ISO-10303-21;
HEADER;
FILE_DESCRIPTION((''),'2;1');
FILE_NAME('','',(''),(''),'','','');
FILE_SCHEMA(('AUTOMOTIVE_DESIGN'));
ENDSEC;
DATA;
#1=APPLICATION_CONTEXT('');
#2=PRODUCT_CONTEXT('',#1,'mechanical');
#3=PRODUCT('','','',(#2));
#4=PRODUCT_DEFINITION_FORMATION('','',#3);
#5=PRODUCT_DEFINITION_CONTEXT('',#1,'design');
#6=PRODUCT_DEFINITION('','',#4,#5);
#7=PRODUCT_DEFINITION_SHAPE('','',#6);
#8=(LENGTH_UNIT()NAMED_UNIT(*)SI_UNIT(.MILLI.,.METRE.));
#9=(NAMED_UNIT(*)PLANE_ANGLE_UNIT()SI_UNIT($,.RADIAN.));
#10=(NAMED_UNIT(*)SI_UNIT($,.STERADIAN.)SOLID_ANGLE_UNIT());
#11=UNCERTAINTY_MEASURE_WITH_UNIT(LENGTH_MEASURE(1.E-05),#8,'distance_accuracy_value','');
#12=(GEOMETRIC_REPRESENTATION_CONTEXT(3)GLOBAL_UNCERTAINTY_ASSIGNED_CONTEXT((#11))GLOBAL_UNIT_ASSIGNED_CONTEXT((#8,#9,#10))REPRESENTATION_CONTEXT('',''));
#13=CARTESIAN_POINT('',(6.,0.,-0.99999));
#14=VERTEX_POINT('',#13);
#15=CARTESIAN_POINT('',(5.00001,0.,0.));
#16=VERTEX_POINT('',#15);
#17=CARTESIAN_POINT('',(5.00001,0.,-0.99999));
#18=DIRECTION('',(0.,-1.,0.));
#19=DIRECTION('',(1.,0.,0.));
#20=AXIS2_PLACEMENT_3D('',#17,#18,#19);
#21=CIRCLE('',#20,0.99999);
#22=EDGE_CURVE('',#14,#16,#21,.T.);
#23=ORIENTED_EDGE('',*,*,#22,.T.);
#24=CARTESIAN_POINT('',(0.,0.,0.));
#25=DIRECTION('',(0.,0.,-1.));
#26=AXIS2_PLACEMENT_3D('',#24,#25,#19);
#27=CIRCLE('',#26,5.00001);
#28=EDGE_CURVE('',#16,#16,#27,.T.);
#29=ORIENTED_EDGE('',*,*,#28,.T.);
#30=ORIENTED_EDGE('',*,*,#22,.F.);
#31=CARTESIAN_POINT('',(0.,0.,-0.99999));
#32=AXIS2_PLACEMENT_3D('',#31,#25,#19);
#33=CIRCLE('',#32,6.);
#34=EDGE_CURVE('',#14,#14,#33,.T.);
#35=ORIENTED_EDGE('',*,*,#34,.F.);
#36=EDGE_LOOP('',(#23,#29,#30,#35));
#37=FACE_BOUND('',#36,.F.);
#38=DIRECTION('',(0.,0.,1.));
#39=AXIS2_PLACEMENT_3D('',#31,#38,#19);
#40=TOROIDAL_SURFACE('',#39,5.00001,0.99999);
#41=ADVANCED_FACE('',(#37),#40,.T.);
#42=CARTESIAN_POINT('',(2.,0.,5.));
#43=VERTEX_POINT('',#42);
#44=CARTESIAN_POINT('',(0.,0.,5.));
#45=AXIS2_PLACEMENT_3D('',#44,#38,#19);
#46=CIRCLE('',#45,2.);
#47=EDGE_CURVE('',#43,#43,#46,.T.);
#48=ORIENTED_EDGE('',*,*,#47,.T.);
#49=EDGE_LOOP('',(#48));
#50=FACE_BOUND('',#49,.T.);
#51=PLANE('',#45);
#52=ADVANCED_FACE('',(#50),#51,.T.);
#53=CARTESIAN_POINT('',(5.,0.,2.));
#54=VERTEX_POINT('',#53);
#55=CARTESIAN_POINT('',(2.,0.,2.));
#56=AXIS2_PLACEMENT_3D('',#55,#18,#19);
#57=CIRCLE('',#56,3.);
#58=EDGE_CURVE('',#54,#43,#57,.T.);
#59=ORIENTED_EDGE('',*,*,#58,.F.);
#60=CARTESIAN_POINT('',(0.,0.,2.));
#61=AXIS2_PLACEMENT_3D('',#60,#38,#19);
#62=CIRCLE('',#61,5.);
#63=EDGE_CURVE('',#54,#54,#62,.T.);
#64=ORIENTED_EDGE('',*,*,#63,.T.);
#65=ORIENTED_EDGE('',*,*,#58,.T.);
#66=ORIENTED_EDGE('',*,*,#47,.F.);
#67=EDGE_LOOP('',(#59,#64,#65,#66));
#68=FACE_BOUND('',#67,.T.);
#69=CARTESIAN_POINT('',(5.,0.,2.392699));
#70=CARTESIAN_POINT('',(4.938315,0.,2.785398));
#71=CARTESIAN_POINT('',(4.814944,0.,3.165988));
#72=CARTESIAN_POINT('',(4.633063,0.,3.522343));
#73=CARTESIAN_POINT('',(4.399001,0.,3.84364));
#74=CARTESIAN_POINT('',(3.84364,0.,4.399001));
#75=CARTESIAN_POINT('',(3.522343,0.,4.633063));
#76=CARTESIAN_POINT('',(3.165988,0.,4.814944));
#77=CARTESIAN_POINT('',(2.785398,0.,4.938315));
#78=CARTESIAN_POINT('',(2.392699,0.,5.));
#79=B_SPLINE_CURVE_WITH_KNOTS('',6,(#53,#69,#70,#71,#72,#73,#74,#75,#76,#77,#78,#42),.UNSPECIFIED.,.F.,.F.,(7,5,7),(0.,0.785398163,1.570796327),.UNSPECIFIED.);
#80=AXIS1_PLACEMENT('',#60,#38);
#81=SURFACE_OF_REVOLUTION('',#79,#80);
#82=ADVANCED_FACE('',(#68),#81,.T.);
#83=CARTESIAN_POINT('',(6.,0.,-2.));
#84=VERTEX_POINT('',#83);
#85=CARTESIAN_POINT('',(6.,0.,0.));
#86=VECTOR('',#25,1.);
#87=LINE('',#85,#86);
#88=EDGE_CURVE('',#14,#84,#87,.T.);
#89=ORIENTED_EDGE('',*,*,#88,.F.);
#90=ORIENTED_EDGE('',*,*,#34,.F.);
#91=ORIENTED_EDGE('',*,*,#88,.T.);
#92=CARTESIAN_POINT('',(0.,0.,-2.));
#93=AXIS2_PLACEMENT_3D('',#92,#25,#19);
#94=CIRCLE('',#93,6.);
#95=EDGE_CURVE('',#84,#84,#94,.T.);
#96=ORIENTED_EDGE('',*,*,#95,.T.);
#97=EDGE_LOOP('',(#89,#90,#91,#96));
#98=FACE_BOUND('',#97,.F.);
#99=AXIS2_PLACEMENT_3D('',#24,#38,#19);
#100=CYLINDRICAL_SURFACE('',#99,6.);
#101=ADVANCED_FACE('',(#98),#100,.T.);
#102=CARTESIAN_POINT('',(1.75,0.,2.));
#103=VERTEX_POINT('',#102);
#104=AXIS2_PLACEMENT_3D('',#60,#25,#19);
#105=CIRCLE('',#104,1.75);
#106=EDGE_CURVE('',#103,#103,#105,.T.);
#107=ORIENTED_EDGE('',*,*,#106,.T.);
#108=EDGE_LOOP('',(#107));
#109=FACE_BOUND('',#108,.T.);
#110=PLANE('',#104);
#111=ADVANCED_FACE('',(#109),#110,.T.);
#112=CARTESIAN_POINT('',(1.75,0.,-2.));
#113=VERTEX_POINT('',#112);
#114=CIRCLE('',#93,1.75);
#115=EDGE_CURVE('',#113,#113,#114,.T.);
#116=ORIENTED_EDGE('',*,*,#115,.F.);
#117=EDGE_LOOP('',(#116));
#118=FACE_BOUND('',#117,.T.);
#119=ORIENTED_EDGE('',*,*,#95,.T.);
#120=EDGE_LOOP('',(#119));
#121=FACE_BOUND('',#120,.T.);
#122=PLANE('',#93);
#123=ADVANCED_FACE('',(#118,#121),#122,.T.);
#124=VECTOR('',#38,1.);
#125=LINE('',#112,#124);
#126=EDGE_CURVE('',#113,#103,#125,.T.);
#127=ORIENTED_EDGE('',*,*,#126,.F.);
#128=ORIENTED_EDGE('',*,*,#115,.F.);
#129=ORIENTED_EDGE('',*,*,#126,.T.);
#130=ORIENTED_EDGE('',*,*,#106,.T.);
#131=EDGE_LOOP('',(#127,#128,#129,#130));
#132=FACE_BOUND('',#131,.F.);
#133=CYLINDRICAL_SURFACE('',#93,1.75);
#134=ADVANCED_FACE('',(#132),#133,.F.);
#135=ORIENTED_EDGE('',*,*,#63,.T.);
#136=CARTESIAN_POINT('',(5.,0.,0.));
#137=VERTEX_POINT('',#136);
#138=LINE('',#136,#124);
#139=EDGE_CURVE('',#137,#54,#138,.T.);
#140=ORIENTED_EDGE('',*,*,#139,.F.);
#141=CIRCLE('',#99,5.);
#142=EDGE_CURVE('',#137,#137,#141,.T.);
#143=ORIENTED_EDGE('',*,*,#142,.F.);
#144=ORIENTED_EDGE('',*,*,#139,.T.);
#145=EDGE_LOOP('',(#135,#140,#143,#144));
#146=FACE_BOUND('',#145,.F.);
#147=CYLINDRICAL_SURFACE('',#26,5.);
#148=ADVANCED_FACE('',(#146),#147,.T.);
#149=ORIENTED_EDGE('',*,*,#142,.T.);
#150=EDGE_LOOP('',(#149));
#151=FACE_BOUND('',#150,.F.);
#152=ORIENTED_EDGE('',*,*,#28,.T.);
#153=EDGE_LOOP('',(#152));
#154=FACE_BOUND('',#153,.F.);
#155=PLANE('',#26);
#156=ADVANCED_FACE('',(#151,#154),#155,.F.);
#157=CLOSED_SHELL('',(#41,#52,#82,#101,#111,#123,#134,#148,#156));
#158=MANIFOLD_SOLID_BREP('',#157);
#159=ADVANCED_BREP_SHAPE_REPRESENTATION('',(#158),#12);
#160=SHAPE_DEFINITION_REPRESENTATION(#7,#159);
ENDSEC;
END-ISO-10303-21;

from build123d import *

# Parameters (mm, degrees)
F0_R     = 5
F1_DEPTH = 5
F2_R     = 3
F3_R     = 6
F3_R_2   = 5
F4_DEPTH = 2
F5_R     = 0.99999
F6_R     = 1.75
F7_DEPTH = 4


# Not quite as in the source:
# - a fillet or chamfer is up to 0.001 mm smaller than in the source, because OpenCascade refuses the exact size


with BuildPart() as f1:
    # F0 (on Top) → F1 (new body)
    with BuildSketch(Plane.XY):
        Circle(F0_R)
    extrude(amount=F1_DEPTH)

    # F2
    f2_edges = [f1.edges().sort_by_distance(p)[0] for p in [
        (-5, 0, 5),
    ]]
    fillet(f2_edges, radius=F2_R)

    # F3 (on face) → F4 (join)
    with BuildSketch(Plane(origin=(0, 0, 0), x_dir=(1, 0, 0), z_dir=(0, 0, -1))):
        Circle(F3_R)
        Circle(F3_R_2, mode=Mode.SUBTRACT)
        Circle(F3_R_2)
    extrude(amount=F4_DEPTH)

    # F5 (radius 1 in the source; OpenCascade refuses exactly that, so slightly less here)
    f5_edges = [f1.edges().sort_by_distance(p)[0] for p in [
        (-6, 0, 0),
    ]]
    fillet(f5_edges, radius=F5_R)

    # F6 (on face) → F7 (cut)
    with BuildSketch(Plane(origin=(0, 0, -2), x_dir=(1, 0, 0), z_dir=(0, 0, -1))):
        Circle(F6_R)
    extrude(amount=-F7_DEPTH, mode=Mode.SUBTRACT)


solid = f1.part
